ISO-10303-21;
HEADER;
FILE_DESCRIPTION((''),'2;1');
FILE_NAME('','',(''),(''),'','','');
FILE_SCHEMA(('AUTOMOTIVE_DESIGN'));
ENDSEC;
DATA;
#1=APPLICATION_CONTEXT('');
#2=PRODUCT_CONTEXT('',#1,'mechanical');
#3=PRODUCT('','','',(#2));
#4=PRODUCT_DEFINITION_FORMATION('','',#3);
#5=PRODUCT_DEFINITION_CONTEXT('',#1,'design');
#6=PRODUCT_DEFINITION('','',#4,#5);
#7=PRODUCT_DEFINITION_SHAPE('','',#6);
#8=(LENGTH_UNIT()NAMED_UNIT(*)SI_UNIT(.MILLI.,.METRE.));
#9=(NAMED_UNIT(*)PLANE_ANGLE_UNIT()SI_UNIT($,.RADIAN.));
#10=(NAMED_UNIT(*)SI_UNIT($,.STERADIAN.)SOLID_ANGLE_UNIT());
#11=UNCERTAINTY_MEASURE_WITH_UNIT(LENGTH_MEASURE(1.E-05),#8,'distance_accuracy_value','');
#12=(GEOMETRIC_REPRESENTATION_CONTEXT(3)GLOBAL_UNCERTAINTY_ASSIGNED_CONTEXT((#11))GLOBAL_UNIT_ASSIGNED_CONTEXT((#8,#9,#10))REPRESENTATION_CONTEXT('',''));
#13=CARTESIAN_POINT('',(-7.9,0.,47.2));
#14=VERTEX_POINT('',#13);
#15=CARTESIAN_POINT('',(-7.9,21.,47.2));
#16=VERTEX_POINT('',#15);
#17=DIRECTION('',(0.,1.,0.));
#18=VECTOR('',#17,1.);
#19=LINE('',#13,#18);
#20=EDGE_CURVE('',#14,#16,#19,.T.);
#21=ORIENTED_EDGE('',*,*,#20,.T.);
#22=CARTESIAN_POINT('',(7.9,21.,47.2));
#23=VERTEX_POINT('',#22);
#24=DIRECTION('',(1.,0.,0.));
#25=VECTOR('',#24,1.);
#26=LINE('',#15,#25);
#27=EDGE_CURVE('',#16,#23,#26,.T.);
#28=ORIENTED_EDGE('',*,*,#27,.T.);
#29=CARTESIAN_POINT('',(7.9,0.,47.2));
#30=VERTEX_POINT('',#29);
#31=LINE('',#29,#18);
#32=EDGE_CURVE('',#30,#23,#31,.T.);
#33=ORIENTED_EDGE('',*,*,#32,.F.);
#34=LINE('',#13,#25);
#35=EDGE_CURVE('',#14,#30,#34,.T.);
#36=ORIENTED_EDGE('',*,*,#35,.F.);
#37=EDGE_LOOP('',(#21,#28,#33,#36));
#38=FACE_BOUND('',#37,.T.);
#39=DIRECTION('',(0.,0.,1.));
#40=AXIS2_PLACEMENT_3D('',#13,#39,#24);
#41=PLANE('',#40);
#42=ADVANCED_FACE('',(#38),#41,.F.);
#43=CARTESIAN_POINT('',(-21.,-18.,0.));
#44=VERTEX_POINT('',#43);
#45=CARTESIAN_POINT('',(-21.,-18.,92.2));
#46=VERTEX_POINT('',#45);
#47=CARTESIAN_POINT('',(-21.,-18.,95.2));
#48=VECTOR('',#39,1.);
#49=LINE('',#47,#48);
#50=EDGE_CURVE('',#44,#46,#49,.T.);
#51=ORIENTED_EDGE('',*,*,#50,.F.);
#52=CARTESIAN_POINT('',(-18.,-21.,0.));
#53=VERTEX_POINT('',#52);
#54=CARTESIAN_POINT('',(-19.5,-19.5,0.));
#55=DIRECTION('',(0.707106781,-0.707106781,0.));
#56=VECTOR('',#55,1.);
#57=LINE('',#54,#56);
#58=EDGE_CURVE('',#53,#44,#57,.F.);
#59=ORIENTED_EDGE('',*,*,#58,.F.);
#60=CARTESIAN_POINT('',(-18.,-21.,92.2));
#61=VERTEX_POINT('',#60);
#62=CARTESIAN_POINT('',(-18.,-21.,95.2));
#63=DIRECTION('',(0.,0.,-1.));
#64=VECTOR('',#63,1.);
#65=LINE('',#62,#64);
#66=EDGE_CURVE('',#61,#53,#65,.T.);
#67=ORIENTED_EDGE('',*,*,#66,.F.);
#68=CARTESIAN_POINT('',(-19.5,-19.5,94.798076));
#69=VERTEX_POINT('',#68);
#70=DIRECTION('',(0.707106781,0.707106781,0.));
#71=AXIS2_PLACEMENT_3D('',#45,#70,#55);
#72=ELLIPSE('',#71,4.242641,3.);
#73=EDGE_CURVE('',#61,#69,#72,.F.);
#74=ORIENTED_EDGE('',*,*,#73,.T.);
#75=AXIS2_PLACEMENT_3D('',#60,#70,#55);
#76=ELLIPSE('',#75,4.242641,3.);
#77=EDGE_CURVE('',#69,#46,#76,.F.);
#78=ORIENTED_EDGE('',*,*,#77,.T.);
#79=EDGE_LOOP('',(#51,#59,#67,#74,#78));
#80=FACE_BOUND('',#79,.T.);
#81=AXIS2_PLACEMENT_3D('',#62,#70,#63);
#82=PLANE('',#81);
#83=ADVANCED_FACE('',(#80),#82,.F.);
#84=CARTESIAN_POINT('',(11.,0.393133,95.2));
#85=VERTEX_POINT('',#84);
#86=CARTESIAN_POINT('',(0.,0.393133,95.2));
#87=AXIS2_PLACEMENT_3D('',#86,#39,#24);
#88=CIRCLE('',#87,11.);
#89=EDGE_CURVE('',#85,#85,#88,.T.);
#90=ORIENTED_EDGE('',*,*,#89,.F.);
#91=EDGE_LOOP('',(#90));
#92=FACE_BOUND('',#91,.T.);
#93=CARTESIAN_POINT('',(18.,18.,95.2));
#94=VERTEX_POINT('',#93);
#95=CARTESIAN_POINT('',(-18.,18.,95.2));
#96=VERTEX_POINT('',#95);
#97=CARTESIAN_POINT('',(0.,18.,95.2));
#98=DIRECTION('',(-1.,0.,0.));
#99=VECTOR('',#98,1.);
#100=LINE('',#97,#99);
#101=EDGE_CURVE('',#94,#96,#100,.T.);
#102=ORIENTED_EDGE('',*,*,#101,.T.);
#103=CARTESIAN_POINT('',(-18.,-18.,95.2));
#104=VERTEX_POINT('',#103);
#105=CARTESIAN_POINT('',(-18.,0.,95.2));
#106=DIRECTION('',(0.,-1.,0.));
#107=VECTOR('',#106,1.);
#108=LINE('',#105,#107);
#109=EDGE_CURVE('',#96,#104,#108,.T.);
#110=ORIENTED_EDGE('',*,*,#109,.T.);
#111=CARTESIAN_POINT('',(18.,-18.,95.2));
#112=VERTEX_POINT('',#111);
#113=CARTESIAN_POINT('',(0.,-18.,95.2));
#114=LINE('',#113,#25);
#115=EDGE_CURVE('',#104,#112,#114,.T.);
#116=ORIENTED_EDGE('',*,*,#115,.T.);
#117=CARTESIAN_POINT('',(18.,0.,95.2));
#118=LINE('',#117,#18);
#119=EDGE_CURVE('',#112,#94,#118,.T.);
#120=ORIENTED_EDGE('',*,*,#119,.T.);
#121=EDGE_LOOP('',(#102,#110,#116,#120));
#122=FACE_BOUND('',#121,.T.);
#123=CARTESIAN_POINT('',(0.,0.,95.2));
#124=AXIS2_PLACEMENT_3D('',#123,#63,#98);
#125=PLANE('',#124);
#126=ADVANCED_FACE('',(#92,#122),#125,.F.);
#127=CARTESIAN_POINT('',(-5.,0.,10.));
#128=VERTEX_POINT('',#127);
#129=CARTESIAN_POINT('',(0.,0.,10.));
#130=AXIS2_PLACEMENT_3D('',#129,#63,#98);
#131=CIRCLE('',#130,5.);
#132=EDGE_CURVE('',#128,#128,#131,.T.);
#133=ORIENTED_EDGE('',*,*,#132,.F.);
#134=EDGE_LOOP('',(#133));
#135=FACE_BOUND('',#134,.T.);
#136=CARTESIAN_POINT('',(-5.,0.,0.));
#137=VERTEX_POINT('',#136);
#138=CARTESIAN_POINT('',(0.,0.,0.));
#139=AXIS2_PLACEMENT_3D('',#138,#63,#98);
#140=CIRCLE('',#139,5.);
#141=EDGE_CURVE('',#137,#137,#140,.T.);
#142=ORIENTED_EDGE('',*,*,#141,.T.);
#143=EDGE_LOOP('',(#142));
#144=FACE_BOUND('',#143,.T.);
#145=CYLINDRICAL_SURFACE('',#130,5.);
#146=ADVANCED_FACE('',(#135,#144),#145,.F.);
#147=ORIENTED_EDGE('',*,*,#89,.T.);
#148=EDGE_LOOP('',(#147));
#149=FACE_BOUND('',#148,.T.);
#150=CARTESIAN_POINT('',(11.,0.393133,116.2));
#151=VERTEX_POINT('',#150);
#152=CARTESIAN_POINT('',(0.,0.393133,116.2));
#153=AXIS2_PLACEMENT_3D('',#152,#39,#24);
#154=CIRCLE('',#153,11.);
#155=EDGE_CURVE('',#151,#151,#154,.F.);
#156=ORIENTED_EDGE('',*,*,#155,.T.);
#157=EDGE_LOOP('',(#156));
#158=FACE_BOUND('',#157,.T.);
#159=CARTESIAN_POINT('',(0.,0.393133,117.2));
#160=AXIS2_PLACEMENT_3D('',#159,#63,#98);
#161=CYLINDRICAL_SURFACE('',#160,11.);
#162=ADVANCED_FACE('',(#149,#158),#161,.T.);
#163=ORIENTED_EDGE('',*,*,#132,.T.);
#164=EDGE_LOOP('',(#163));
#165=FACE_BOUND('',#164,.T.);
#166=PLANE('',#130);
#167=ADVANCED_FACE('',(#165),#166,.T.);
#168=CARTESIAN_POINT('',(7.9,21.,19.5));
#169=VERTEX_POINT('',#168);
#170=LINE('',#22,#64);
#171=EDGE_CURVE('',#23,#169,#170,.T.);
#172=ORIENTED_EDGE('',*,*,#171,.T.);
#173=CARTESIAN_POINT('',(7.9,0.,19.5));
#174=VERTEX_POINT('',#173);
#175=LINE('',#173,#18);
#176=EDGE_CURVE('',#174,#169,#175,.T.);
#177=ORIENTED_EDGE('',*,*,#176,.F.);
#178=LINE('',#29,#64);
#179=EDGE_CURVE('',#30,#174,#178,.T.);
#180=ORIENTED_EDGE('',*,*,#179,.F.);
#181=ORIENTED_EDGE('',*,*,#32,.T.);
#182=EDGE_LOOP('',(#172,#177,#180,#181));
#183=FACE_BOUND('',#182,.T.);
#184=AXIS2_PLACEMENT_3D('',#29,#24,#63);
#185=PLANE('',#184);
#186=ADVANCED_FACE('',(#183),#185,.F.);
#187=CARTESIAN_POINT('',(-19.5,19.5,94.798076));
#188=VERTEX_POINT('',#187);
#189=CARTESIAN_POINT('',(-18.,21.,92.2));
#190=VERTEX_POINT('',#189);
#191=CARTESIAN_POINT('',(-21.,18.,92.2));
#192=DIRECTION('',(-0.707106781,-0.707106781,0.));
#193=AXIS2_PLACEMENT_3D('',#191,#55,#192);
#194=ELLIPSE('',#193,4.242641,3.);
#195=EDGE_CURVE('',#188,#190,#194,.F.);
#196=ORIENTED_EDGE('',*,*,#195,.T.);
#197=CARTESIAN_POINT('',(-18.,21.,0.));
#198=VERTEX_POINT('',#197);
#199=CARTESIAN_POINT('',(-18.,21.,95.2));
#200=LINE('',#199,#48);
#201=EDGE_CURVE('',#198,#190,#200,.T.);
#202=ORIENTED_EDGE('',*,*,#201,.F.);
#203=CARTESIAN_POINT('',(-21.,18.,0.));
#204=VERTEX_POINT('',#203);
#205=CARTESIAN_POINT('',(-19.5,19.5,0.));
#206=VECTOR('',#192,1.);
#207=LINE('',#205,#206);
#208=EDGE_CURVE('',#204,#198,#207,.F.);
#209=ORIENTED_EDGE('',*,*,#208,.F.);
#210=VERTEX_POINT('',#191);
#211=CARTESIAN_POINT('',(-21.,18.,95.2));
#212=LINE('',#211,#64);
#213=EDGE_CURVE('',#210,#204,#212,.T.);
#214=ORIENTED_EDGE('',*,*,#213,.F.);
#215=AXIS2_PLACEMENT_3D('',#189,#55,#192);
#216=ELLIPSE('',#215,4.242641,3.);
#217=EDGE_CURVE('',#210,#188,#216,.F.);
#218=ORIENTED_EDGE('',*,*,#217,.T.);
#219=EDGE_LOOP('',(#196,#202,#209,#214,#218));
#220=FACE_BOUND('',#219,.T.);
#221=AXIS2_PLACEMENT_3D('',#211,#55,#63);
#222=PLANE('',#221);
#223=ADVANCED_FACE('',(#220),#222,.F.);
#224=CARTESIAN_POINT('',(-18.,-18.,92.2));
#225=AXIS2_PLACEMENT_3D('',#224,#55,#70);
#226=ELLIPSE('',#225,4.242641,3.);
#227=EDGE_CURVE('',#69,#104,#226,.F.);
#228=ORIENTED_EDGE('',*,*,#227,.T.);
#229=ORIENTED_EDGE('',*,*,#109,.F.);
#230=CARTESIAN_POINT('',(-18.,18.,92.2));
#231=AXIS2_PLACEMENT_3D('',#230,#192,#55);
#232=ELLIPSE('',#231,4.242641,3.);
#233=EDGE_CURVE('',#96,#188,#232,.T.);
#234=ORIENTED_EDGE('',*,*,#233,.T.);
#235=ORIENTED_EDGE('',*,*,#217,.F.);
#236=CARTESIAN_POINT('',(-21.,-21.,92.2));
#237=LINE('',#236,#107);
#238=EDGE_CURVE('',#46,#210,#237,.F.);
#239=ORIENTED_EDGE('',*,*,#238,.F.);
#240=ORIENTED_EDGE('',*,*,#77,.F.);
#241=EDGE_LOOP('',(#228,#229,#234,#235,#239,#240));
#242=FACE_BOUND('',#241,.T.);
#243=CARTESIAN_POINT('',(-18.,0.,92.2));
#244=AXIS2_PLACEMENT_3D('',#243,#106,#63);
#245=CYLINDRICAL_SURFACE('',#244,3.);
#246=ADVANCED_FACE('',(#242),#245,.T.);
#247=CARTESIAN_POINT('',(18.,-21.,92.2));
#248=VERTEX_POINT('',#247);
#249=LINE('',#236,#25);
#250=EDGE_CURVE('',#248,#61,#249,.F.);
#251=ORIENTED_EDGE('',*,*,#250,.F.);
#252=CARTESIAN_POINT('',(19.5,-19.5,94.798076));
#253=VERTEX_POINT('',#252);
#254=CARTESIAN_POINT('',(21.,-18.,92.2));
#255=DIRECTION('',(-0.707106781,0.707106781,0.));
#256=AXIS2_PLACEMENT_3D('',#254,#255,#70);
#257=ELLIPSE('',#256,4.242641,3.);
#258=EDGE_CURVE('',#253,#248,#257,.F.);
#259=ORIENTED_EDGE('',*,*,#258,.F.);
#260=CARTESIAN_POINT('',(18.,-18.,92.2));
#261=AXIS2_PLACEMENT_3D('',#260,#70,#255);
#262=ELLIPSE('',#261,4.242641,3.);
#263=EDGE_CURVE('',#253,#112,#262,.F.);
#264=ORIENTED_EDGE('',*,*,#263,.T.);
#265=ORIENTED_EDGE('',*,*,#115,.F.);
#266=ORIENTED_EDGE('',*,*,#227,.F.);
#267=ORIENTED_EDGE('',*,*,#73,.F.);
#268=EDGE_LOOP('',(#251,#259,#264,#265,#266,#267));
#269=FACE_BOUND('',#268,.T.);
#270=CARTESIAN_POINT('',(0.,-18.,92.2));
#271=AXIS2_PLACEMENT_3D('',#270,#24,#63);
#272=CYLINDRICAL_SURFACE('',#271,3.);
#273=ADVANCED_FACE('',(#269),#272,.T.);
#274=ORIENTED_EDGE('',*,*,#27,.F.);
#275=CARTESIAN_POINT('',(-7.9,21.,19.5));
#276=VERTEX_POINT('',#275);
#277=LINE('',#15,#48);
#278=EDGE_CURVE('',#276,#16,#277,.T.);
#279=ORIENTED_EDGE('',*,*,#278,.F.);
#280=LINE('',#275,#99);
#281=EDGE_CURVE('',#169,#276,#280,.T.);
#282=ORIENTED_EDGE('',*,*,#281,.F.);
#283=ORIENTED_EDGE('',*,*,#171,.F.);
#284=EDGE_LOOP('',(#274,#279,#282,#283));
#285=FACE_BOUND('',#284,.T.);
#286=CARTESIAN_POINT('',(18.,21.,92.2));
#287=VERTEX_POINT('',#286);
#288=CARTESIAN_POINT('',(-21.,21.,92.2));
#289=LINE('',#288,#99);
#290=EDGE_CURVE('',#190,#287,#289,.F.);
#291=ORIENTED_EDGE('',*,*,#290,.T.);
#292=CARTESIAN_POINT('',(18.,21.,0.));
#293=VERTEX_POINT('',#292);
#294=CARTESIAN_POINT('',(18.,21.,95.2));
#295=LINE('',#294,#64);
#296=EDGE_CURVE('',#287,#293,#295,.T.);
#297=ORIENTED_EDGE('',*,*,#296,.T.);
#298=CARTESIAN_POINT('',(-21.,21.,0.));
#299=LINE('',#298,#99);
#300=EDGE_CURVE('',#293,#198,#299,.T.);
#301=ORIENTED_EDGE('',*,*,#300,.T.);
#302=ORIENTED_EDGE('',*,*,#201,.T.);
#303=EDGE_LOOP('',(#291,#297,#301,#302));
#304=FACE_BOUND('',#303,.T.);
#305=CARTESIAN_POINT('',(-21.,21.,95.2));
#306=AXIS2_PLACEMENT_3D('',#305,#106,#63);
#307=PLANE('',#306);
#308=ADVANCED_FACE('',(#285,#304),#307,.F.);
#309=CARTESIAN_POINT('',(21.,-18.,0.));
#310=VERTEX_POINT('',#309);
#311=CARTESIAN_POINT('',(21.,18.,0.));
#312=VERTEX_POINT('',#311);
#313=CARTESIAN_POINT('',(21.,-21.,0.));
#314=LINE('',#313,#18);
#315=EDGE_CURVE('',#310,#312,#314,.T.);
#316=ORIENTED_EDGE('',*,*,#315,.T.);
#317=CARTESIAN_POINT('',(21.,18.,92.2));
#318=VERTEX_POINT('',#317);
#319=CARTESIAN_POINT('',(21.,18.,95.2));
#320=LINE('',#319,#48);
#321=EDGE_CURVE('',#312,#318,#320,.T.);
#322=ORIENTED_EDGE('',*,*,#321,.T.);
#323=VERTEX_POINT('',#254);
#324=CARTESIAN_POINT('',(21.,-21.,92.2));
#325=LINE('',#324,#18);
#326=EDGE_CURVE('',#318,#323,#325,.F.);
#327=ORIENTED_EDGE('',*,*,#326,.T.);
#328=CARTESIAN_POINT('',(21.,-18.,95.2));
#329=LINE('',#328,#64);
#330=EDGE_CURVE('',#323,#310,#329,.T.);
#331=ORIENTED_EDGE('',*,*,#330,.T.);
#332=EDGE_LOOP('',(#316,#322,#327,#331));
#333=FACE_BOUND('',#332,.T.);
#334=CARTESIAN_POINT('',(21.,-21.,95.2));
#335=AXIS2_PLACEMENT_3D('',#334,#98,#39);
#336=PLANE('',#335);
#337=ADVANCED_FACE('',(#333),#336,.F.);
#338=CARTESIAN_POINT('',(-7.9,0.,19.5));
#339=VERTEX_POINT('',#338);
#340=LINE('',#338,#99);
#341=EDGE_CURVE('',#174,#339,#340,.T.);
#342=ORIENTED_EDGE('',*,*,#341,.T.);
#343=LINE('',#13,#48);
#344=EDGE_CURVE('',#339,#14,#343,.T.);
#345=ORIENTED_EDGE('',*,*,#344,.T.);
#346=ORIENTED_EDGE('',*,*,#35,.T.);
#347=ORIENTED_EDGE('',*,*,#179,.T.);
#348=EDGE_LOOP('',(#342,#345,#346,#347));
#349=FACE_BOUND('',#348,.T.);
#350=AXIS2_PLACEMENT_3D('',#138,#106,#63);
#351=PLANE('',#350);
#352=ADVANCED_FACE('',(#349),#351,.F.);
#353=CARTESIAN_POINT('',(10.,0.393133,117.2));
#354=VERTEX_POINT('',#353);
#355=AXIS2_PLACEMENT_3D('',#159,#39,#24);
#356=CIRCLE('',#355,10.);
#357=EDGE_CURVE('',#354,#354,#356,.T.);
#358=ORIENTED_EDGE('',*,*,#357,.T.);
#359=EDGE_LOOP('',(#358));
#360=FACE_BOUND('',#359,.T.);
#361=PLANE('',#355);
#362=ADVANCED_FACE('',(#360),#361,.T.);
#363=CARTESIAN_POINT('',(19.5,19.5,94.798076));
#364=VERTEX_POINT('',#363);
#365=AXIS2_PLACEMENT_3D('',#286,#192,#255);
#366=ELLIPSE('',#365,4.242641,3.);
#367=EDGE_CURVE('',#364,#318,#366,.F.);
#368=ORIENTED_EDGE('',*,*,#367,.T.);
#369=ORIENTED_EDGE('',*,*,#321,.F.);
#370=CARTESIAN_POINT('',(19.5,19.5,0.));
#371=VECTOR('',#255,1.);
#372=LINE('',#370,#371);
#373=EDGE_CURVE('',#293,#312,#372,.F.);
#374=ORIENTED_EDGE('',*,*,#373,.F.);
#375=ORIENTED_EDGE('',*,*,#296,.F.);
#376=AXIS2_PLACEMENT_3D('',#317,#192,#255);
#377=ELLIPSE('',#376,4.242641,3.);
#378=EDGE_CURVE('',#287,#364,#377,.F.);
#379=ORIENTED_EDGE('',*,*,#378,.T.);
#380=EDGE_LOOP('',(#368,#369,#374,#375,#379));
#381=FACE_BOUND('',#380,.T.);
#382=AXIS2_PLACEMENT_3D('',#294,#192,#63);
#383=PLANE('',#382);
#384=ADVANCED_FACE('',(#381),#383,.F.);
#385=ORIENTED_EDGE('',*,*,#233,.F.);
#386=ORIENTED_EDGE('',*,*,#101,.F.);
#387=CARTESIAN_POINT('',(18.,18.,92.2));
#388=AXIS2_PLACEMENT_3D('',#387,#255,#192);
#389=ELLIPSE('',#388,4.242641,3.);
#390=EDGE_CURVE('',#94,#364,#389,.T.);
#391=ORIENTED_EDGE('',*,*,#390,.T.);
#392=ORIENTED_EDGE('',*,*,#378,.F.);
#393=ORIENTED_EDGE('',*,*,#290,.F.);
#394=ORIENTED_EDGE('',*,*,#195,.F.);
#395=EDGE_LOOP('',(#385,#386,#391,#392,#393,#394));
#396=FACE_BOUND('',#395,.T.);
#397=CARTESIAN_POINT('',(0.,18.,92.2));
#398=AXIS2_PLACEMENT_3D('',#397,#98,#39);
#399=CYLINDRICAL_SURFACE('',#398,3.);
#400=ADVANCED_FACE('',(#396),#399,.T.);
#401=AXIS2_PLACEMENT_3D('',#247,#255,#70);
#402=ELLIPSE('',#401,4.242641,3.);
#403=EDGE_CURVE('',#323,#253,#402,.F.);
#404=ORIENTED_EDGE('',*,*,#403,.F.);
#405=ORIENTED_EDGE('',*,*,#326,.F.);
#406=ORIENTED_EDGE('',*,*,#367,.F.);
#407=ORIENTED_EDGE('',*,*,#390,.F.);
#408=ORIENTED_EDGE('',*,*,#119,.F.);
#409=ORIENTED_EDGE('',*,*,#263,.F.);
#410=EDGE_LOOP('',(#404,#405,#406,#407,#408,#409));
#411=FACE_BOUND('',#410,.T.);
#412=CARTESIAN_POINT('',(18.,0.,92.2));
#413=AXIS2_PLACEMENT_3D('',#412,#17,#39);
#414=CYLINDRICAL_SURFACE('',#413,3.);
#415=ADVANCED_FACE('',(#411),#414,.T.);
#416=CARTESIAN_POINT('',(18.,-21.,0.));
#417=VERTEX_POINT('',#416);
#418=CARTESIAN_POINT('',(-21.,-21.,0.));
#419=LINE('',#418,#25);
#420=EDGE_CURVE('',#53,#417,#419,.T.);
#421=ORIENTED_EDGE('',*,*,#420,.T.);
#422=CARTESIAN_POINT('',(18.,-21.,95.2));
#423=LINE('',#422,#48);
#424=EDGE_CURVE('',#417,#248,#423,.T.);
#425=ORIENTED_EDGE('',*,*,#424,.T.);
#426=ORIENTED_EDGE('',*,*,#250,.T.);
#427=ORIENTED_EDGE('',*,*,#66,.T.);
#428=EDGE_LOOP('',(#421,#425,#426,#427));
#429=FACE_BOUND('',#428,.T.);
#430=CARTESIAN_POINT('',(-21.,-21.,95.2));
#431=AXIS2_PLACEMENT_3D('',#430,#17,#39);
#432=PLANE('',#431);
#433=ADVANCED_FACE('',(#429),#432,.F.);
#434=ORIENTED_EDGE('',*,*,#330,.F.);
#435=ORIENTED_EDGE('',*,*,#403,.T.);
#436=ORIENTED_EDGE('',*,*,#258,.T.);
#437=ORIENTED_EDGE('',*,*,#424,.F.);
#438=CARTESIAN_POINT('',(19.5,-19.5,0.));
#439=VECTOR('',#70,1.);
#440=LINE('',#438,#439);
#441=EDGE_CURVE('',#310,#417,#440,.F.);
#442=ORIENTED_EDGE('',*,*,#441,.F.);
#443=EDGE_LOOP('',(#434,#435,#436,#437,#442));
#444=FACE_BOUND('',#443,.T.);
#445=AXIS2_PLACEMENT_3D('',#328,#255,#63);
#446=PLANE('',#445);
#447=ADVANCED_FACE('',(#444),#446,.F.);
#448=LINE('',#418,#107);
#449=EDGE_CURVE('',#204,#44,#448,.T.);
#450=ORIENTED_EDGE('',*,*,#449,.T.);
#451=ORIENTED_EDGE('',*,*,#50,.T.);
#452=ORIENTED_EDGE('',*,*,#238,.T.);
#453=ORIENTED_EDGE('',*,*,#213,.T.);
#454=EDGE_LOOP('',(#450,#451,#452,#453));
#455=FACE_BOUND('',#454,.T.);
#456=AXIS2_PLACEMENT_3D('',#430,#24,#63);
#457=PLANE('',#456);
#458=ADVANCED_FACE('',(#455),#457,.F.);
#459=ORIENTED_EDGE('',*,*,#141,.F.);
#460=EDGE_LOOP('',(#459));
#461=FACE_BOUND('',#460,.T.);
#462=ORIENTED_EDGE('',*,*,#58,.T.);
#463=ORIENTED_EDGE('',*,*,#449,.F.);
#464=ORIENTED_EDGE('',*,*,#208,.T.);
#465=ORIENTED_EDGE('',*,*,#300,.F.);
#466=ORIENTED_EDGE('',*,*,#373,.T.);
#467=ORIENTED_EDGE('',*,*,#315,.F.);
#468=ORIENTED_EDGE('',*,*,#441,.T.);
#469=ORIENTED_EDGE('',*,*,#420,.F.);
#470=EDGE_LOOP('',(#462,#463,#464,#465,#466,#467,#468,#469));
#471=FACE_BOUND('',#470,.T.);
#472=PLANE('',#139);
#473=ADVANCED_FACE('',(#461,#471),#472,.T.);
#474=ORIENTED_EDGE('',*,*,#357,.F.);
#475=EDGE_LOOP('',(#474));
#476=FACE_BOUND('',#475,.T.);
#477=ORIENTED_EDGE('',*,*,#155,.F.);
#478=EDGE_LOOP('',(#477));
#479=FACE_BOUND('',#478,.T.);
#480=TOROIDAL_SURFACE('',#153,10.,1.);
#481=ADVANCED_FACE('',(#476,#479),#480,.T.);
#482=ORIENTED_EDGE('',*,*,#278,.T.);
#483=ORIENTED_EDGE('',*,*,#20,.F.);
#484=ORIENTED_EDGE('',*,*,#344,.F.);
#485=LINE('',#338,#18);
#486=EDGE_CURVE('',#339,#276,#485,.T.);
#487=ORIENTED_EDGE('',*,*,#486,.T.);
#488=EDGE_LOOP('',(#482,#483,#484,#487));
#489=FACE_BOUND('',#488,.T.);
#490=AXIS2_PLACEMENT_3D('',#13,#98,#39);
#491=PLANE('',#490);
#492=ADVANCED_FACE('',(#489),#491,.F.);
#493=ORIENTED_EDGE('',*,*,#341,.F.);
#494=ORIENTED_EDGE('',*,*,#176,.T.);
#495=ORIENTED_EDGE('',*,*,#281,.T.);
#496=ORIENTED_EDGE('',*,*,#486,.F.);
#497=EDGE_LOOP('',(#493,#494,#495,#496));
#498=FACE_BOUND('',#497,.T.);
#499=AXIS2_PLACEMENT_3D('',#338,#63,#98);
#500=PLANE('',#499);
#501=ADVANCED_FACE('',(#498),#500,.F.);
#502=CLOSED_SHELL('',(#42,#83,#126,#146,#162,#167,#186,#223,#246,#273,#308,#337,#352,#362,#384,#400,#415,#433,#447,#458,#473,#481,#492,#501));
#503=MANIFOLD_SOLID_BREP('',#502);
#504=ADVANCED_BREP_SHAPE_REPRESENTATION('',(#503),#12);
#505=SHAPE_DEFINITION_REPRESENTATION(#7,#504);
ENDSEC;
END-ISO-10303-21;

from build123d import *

# Parameters (mm, degrees)
SKETCH1_W           = 42
SKETCH1_H           = 42
BOSS_EXTRUDE1_DEPTH = 95.2
SKETCH2_R           = 11
BOSS_EXTRUDE2_DEPTH = 22
SKETCH3_W           = 15.8
SKETCH3_H           = 27.7
CUT_EXTRUDE1_DEPTH  = 21
SKETCH4_R           = 5
CUT_EXTRUDE2_DEPTH  = 10
CHAMFER1_SIZE       = 3
FILLET1_R           = 3
FILLET2_R           = 1


with BuildPart() as part:
    # Sketch1 → Boss-Extrude1 (new body)
    with BuildSketch(Plane.XY):
        Rectangle(SKETCH1_W, SKETCH1_H)
    extrude(amount=BOSS_EXTRUDE1_DEPTH)

    # Sketch2 → Boss-Extrude2 (add)
    with BuildSketch(Plane.XY.offset(95.2)):
        with Locations((0, 0.393132524)):
            Circle(SKETCH2_R)
    extrude(amount=BOSS_EXTRUDE2_DEPTH)

    # Sketch3 → Cut-Extrude1 (cut)
    with BuildSketch(Plane(origin=(0, 21, 0), x_dir=(1, 0, 0), z_dir=(0, 1, 0))):
        with Locations((0, -33.35)):
            Rectangle(SKETCH3_W, SKETCH3_H)
    extrude(amount=-CUT_EXTRUDE1_DEPTH, mode=Mode.SUBTRACT)

    # Sketch4 → Cut-Extrude2 (cut)
    with BuildSketch(Plane(origin=(0, 0, 0), x_dir=(-1, 0, 0), z_dir=(0, 0, -1))):
        Circle(SKETCH4_R)
    extrude(amount=-CUT_EXTRUDE2_DEPTH, mode=Mode.SUBTRACT)

    # Chamfer1
    chamfer1_edges = [part.edges().sort_by_distance(p)[0] for p in [
        (21, -21, 47.6),
        (-21, -21, 47.6),
        (-21, 21, 47.6),
        (21, 21, 47.6),
    ]]
    chamfer(chamfer1_edges, length=CHAMFER1_SIZE)

    # Fillet1
    # the kernel refuses this fillet: 3 mm, written as the material it takes off along each edge
    with BuildSketch(Plane(origin=(-21, 25.5, 95.2), x_dir=(1, 0, 0), z_dir=(0, -1, 0)), Plane(origin=(21, -25.5, 95.2), x_dir=(-1, 0, 0), z_dir=(0, 1, 0)), Plane(origin=(25.5, 21, 95.2), x_dir=(0, -1, 0), z_dir=(-1, 0, 0))) as fillet1_piece_1:
        with BuildLine():
            CenterArc((FILLET1_R, -FILLET1_R), FILLET1_R, 90, 90)
            Line((0, -FILLET1_R), (0, 0))
            Line((0, 0), (FILLET1_R, 0))
        make_face()
    extrude(amount=51, mode=Mode.SUBTRACT)
    with BuildSketch(Plane(origin=(-25.5, -21, 95.2), x_dir=(0, 0, -1), z_dir=(1, 0, 0))) as fillet1_piece_2:
        with BuildLine():
            CenterArc((FILLET1_R, FILLET1_R), FILLET1_R, 180, 90)
            Line((0, FILLET1_R), (0, 0))
            Line((0, 0), (FILLET1_R, 0))
        make_face()
    extrude(amount=51, mode=Mode.SUBTRACT)

    # Fillet2
    fillet2_edges = [part.edges().sort_by_distance(p)[0] for p in [
        (-11, 0.393132524, 117.2),
    ]]
    fillet(fillet2_edges, radius=FILLET2_R)


solid = part.part
